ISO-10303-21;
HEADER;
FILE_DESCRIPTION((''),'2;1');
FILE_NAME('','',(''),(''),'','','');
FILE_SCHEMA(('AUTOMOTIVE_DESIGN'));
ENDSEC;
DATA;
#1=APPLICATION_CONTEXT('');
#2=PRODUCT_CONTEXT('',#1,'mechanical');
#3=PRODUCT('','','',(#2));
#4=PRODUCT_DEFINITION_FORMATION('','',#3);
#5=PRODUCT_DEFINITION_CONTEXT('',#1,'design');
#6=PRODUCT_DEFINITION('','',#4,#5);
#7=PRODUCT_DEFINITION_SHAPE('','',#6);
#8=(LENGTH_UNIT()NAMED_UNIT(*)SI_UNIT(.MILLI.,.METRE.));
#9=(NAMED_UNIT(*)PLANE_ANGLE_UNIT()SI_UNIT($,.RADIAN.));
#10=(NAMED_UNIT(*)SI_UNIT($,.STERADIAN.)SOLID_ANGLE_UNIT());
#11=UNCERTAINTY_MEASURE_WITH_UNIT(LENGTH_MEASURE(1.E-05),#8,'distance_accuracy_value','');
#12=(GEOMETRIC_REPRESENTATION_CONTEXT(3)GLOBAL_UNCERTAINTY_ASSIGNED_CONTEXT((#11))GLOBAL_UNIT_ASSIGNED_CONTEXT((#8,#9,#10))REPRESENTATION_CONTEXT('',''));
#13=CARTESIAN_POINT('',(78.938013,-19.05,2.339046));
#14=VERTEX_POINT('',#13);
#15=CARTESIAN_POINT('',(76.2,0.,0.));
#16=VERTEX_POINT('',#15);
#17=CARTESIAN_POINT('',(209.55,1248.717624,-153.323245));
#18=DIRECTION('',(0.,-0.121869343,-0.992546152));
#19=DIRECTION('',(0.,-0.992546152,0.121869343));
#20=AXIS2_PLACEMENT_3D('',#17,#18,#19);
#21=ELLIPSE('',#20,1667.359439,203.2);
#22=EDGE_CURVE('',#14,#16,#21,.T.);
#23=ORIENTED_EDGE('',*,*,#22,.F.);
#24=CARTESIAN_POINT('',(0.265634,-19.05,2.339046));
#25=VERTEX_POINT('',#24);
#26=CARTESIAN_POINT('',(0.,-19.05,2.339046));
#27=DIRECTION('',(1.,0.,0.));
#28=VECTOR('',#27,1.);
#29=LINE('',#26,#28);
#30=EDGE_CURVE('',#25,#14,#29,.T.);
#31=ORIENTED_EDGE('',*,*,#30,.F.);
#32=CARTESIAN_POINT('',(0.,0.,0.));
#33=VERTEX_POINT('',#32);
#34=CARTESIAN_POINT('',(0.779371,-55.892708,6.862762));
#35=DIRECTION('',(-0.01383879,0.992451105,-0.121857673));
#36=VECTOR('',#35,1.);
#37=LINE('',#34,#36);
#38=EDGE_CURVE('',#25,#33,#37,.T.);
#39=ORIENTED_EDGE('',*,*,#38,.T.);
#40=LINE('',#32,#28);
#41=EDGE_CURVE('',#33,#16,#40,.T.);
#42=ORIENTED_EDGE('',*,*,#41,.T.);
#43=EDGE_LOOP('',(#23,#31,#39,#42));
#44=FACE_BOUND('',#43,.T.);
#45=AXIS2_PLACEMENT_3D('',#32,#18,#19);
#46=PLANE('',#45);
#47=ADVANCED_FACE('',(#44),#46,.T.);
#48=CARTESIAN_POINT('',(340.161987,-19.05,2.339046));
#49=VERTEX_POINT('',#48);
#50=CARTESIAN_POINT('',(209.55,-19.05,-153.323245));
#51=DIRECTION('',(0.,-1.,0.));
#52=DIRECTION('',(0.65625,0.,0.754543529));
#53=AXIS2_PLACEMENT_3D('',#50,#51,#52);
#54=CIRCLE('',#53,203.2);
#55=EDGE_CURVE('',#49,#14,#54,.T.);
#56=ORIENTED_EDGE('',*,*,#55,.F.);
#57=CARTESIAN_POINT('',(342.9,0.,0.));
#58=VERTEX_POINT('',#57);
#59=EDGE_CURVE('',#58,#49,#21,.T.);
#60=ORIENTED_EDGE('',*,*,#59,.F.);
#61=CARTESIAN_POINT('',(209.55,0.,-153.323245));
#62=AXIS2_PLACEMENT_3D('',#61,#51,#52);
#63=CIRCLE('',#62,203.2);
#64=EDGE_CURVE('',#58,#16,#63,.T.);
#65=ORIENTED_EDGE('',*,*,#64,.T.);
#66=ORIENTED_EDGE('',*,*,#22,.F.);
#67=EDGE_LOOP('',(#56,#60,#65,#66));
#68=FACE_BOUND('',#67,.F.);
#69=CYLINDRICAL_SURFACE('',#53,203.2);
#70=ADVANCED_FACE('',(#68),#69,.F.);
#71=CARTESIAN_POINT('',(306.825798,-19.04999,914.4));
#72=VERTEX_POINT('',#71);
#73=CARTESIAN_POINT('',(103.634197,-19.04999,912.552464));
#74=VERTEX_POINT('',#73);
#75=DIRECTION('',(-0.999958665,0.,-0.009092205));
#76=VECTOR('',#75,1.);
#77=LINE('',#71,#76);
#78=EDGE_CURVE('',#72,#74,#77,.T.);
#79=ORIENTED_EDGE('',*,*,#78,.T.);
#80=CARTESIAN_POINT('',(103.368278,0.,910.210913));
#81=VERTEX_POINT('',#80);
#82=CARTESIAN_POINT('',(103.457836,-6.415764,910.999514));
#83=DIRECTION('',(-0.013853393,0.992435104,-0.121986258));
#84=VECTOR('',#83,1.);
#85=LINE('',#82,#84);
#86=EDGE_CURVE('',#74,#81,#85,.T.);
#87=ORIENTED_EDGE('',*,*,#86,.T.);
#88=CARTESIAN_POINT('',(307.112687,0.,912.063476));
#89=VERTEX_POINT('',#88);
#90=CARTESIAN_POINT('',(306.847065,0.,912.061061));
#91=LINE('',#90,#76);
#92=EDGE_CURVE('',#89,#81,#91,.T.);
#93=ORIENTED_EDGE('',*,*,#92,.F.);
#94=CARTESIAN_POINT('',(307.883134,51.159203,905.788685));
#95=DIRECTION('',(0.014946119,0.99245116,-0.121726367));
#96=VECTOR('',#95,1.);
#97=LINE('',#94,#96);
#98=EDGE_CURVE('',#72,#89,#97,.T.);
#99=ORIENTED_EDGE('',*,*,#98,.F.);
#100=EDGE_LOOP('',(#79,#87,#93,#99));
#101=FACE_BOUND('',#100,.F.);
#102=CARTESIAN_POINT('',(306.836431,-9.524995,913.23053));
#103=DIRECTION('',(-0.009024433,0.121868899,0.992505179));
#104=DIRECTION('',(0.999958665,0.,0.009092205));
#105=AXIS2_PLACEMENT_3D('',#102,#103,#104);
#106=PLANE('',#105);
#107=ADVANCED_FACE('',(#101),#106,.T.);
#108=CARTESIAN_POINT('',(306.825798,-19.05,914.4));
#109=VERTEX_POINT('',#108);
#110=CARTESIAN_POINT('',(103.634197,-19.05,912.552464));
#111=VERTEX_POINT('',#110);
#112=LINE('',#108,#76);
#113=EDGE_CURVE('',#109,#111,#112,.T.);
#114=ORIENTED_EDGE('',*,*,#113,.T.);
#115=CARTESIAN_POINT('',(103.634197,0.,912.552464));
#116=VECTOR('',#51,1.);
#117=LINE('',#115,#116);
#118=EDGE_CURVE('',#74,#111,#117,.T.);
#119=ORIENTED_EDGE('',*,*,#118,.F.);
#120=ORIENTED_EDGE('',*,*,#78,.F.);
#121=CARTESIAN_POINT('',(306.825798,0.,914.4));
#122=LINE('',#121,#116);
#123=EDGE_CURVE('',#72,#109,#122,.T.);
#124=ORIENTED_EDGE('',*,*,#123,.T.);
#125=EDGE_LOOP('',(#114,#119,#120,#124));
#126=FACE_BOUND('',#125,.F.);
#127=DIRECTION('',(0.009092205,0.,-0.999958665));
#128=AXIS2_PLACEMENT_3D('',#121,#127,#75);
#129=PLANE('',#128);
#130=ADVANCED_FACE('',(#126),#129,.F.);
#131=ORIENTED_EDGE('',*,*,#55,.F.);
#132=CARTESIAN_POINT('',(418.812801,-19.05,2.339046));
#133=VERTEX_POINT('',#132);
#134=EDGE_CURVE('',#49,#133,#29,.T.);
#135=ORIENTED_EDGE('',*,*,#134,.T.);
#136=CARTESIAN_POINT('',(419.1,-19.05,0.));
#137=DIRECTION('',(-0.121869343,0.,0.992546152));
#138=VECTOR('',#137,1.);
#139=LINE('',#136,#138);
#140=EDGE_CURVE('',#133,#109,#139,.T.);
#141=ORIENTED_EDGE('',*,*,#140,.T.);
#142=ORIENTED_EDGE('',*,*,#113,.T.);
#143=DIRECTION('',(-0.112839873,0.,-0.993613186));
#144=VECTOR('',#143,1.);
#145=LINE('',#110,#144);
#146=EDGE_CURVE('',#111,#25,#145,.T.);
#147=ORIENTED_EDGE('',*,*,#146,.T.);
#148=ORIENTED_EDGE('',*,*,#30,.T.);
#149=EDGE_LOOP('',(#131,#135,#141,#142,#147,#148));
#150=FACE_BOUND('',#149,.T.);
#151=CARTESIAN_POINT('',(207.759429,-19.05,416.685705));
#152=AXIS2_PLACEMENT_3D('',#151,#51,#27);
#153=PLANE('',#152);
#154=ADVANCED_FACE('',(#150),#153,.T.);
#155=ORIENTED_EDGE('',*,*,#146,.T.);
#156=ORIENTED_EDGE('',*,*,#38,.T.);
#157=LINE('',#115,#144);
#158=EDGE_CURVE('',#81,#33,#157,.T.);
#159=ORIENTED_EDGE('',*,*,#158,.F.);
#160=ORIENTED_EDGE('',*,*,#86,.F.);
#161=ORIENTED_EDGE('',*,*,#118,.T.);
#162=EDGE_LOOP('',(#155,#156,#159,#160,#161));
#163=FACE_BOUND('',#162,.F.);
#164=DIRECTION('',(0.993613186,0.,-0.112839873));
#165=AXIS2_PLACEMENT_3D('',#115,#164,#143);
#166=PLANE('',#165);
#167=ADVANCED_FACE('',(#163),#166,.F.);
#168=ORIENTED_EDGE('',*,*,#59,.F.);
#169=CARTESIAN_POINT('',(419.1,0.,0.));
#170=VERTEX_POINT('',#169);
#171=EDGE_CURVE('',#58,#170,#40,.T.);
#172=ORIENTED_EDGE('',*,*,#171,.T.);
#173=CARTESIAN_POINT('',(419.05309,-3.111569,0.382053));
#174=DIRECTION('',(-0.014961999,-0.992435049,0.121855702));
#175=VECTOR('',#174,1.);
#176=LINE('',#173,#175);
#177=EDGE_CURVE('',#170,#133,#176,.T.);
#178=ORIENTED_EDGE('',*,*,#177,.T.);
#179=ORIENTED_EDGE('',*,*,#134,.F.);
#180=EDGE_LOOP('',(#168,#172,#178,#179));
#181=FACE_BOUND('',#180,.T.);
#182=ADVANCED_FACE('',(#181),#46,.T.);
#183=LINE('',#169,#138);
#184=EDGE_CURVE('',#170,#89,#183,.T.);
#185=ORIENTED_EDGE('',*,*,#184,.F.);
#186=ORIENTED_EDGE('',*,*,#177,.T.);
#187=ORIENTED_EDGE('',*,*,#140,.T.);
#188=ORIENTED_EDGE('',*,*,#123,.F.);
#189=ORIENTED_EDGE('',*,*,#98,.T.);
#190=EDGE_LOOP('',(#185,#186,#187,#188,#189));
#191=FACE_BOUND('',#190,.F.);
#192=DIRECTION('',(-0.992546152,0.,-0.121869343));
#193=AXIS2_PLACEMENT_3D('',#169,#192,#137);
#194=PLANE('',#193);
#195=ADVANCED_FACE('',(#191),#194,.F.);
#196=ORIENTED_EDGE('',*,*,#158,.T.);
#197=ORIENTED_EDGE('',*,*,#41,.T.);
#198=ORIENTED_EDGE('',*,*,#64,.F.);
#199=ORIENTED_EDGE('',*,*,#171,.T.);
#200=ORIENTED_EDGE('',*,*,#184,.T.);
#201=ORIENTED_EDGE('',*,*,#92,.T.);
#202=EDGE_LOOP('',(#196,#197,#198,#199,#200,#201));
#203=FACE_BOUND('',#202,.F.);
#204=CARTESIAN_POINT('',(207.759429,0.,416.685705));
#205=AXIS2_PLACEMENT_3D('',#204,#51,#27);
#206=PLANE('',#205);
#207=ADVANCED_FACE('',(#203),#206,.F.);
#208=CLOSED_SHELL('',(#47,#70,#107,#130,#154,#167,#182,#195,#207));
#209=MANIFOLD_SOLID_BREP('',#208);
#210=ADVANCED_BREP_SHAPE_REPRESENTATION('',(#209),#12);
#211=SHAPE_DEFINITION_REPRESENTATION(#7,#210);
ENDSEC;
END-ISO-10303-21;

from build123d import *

# Parameters (mm, degrees)
F1_DEPTH = 19.05
F3_DEPTH = 19.05
F5_DEPTH = 419.1
F6_SIZE2 = 2.339036
F6_SIZE  = 19.04999


# Not quite as in the source:
# - a fillet or chamfer is up to 0.001 mm smaller than in the source, because OpenCascade refuses the exact size


with BuildPart() as f1:
    # F0 (on Front) → F1 (new body)
    with BuildSketch(Plane.XZ):
        Polygon((306.8257975104, 914.4), (103.6341967715, 912.5524640321), (0, 0), (419.1, 0), align=None)
    extrude(amount=F1_DEPTH)

    # F2 (on face) → F3 (cut)
    with BuildSketch(Plane.XZ.offset(19.05)):
        with BuildLine():
            Line((76.2, 0), (342.9, 0))
            ThreePointArc((342.9, 0), (209.55, 49.8767548608), (76.2, 0))
        make_face()
    extrude(amount=-F3_DEPTH, mode=Mode.SUBTRACT)

    # F4 (on Right) → F5 (cut)
    with BuildSketch(Plane.YZ):
        Polygon((-19.05, 2.3390458852), (-19.05, 0), (0, 0), align=None)
    extrude(amount=F5_DEPTH, mode=Mode.SUBTRACT)

    # F6 (size 19.05 and 2.3390458852 in the source; OpenCascade refuses exactly that, so slightly less here)
    f6_edges = [f1.edges().sort_by_distance(p)[0] for p in [
        (205.229997, 0, 913.476232),
    ]]
    f6_side = f1.faces().sort_by_distance((205.229997, -9.525, 913.476232))[0]
    chamfer(f6_edges, length=F6_SIZE, length2=F6_SIZE2, reference=f6_side)


solid = f1.part
